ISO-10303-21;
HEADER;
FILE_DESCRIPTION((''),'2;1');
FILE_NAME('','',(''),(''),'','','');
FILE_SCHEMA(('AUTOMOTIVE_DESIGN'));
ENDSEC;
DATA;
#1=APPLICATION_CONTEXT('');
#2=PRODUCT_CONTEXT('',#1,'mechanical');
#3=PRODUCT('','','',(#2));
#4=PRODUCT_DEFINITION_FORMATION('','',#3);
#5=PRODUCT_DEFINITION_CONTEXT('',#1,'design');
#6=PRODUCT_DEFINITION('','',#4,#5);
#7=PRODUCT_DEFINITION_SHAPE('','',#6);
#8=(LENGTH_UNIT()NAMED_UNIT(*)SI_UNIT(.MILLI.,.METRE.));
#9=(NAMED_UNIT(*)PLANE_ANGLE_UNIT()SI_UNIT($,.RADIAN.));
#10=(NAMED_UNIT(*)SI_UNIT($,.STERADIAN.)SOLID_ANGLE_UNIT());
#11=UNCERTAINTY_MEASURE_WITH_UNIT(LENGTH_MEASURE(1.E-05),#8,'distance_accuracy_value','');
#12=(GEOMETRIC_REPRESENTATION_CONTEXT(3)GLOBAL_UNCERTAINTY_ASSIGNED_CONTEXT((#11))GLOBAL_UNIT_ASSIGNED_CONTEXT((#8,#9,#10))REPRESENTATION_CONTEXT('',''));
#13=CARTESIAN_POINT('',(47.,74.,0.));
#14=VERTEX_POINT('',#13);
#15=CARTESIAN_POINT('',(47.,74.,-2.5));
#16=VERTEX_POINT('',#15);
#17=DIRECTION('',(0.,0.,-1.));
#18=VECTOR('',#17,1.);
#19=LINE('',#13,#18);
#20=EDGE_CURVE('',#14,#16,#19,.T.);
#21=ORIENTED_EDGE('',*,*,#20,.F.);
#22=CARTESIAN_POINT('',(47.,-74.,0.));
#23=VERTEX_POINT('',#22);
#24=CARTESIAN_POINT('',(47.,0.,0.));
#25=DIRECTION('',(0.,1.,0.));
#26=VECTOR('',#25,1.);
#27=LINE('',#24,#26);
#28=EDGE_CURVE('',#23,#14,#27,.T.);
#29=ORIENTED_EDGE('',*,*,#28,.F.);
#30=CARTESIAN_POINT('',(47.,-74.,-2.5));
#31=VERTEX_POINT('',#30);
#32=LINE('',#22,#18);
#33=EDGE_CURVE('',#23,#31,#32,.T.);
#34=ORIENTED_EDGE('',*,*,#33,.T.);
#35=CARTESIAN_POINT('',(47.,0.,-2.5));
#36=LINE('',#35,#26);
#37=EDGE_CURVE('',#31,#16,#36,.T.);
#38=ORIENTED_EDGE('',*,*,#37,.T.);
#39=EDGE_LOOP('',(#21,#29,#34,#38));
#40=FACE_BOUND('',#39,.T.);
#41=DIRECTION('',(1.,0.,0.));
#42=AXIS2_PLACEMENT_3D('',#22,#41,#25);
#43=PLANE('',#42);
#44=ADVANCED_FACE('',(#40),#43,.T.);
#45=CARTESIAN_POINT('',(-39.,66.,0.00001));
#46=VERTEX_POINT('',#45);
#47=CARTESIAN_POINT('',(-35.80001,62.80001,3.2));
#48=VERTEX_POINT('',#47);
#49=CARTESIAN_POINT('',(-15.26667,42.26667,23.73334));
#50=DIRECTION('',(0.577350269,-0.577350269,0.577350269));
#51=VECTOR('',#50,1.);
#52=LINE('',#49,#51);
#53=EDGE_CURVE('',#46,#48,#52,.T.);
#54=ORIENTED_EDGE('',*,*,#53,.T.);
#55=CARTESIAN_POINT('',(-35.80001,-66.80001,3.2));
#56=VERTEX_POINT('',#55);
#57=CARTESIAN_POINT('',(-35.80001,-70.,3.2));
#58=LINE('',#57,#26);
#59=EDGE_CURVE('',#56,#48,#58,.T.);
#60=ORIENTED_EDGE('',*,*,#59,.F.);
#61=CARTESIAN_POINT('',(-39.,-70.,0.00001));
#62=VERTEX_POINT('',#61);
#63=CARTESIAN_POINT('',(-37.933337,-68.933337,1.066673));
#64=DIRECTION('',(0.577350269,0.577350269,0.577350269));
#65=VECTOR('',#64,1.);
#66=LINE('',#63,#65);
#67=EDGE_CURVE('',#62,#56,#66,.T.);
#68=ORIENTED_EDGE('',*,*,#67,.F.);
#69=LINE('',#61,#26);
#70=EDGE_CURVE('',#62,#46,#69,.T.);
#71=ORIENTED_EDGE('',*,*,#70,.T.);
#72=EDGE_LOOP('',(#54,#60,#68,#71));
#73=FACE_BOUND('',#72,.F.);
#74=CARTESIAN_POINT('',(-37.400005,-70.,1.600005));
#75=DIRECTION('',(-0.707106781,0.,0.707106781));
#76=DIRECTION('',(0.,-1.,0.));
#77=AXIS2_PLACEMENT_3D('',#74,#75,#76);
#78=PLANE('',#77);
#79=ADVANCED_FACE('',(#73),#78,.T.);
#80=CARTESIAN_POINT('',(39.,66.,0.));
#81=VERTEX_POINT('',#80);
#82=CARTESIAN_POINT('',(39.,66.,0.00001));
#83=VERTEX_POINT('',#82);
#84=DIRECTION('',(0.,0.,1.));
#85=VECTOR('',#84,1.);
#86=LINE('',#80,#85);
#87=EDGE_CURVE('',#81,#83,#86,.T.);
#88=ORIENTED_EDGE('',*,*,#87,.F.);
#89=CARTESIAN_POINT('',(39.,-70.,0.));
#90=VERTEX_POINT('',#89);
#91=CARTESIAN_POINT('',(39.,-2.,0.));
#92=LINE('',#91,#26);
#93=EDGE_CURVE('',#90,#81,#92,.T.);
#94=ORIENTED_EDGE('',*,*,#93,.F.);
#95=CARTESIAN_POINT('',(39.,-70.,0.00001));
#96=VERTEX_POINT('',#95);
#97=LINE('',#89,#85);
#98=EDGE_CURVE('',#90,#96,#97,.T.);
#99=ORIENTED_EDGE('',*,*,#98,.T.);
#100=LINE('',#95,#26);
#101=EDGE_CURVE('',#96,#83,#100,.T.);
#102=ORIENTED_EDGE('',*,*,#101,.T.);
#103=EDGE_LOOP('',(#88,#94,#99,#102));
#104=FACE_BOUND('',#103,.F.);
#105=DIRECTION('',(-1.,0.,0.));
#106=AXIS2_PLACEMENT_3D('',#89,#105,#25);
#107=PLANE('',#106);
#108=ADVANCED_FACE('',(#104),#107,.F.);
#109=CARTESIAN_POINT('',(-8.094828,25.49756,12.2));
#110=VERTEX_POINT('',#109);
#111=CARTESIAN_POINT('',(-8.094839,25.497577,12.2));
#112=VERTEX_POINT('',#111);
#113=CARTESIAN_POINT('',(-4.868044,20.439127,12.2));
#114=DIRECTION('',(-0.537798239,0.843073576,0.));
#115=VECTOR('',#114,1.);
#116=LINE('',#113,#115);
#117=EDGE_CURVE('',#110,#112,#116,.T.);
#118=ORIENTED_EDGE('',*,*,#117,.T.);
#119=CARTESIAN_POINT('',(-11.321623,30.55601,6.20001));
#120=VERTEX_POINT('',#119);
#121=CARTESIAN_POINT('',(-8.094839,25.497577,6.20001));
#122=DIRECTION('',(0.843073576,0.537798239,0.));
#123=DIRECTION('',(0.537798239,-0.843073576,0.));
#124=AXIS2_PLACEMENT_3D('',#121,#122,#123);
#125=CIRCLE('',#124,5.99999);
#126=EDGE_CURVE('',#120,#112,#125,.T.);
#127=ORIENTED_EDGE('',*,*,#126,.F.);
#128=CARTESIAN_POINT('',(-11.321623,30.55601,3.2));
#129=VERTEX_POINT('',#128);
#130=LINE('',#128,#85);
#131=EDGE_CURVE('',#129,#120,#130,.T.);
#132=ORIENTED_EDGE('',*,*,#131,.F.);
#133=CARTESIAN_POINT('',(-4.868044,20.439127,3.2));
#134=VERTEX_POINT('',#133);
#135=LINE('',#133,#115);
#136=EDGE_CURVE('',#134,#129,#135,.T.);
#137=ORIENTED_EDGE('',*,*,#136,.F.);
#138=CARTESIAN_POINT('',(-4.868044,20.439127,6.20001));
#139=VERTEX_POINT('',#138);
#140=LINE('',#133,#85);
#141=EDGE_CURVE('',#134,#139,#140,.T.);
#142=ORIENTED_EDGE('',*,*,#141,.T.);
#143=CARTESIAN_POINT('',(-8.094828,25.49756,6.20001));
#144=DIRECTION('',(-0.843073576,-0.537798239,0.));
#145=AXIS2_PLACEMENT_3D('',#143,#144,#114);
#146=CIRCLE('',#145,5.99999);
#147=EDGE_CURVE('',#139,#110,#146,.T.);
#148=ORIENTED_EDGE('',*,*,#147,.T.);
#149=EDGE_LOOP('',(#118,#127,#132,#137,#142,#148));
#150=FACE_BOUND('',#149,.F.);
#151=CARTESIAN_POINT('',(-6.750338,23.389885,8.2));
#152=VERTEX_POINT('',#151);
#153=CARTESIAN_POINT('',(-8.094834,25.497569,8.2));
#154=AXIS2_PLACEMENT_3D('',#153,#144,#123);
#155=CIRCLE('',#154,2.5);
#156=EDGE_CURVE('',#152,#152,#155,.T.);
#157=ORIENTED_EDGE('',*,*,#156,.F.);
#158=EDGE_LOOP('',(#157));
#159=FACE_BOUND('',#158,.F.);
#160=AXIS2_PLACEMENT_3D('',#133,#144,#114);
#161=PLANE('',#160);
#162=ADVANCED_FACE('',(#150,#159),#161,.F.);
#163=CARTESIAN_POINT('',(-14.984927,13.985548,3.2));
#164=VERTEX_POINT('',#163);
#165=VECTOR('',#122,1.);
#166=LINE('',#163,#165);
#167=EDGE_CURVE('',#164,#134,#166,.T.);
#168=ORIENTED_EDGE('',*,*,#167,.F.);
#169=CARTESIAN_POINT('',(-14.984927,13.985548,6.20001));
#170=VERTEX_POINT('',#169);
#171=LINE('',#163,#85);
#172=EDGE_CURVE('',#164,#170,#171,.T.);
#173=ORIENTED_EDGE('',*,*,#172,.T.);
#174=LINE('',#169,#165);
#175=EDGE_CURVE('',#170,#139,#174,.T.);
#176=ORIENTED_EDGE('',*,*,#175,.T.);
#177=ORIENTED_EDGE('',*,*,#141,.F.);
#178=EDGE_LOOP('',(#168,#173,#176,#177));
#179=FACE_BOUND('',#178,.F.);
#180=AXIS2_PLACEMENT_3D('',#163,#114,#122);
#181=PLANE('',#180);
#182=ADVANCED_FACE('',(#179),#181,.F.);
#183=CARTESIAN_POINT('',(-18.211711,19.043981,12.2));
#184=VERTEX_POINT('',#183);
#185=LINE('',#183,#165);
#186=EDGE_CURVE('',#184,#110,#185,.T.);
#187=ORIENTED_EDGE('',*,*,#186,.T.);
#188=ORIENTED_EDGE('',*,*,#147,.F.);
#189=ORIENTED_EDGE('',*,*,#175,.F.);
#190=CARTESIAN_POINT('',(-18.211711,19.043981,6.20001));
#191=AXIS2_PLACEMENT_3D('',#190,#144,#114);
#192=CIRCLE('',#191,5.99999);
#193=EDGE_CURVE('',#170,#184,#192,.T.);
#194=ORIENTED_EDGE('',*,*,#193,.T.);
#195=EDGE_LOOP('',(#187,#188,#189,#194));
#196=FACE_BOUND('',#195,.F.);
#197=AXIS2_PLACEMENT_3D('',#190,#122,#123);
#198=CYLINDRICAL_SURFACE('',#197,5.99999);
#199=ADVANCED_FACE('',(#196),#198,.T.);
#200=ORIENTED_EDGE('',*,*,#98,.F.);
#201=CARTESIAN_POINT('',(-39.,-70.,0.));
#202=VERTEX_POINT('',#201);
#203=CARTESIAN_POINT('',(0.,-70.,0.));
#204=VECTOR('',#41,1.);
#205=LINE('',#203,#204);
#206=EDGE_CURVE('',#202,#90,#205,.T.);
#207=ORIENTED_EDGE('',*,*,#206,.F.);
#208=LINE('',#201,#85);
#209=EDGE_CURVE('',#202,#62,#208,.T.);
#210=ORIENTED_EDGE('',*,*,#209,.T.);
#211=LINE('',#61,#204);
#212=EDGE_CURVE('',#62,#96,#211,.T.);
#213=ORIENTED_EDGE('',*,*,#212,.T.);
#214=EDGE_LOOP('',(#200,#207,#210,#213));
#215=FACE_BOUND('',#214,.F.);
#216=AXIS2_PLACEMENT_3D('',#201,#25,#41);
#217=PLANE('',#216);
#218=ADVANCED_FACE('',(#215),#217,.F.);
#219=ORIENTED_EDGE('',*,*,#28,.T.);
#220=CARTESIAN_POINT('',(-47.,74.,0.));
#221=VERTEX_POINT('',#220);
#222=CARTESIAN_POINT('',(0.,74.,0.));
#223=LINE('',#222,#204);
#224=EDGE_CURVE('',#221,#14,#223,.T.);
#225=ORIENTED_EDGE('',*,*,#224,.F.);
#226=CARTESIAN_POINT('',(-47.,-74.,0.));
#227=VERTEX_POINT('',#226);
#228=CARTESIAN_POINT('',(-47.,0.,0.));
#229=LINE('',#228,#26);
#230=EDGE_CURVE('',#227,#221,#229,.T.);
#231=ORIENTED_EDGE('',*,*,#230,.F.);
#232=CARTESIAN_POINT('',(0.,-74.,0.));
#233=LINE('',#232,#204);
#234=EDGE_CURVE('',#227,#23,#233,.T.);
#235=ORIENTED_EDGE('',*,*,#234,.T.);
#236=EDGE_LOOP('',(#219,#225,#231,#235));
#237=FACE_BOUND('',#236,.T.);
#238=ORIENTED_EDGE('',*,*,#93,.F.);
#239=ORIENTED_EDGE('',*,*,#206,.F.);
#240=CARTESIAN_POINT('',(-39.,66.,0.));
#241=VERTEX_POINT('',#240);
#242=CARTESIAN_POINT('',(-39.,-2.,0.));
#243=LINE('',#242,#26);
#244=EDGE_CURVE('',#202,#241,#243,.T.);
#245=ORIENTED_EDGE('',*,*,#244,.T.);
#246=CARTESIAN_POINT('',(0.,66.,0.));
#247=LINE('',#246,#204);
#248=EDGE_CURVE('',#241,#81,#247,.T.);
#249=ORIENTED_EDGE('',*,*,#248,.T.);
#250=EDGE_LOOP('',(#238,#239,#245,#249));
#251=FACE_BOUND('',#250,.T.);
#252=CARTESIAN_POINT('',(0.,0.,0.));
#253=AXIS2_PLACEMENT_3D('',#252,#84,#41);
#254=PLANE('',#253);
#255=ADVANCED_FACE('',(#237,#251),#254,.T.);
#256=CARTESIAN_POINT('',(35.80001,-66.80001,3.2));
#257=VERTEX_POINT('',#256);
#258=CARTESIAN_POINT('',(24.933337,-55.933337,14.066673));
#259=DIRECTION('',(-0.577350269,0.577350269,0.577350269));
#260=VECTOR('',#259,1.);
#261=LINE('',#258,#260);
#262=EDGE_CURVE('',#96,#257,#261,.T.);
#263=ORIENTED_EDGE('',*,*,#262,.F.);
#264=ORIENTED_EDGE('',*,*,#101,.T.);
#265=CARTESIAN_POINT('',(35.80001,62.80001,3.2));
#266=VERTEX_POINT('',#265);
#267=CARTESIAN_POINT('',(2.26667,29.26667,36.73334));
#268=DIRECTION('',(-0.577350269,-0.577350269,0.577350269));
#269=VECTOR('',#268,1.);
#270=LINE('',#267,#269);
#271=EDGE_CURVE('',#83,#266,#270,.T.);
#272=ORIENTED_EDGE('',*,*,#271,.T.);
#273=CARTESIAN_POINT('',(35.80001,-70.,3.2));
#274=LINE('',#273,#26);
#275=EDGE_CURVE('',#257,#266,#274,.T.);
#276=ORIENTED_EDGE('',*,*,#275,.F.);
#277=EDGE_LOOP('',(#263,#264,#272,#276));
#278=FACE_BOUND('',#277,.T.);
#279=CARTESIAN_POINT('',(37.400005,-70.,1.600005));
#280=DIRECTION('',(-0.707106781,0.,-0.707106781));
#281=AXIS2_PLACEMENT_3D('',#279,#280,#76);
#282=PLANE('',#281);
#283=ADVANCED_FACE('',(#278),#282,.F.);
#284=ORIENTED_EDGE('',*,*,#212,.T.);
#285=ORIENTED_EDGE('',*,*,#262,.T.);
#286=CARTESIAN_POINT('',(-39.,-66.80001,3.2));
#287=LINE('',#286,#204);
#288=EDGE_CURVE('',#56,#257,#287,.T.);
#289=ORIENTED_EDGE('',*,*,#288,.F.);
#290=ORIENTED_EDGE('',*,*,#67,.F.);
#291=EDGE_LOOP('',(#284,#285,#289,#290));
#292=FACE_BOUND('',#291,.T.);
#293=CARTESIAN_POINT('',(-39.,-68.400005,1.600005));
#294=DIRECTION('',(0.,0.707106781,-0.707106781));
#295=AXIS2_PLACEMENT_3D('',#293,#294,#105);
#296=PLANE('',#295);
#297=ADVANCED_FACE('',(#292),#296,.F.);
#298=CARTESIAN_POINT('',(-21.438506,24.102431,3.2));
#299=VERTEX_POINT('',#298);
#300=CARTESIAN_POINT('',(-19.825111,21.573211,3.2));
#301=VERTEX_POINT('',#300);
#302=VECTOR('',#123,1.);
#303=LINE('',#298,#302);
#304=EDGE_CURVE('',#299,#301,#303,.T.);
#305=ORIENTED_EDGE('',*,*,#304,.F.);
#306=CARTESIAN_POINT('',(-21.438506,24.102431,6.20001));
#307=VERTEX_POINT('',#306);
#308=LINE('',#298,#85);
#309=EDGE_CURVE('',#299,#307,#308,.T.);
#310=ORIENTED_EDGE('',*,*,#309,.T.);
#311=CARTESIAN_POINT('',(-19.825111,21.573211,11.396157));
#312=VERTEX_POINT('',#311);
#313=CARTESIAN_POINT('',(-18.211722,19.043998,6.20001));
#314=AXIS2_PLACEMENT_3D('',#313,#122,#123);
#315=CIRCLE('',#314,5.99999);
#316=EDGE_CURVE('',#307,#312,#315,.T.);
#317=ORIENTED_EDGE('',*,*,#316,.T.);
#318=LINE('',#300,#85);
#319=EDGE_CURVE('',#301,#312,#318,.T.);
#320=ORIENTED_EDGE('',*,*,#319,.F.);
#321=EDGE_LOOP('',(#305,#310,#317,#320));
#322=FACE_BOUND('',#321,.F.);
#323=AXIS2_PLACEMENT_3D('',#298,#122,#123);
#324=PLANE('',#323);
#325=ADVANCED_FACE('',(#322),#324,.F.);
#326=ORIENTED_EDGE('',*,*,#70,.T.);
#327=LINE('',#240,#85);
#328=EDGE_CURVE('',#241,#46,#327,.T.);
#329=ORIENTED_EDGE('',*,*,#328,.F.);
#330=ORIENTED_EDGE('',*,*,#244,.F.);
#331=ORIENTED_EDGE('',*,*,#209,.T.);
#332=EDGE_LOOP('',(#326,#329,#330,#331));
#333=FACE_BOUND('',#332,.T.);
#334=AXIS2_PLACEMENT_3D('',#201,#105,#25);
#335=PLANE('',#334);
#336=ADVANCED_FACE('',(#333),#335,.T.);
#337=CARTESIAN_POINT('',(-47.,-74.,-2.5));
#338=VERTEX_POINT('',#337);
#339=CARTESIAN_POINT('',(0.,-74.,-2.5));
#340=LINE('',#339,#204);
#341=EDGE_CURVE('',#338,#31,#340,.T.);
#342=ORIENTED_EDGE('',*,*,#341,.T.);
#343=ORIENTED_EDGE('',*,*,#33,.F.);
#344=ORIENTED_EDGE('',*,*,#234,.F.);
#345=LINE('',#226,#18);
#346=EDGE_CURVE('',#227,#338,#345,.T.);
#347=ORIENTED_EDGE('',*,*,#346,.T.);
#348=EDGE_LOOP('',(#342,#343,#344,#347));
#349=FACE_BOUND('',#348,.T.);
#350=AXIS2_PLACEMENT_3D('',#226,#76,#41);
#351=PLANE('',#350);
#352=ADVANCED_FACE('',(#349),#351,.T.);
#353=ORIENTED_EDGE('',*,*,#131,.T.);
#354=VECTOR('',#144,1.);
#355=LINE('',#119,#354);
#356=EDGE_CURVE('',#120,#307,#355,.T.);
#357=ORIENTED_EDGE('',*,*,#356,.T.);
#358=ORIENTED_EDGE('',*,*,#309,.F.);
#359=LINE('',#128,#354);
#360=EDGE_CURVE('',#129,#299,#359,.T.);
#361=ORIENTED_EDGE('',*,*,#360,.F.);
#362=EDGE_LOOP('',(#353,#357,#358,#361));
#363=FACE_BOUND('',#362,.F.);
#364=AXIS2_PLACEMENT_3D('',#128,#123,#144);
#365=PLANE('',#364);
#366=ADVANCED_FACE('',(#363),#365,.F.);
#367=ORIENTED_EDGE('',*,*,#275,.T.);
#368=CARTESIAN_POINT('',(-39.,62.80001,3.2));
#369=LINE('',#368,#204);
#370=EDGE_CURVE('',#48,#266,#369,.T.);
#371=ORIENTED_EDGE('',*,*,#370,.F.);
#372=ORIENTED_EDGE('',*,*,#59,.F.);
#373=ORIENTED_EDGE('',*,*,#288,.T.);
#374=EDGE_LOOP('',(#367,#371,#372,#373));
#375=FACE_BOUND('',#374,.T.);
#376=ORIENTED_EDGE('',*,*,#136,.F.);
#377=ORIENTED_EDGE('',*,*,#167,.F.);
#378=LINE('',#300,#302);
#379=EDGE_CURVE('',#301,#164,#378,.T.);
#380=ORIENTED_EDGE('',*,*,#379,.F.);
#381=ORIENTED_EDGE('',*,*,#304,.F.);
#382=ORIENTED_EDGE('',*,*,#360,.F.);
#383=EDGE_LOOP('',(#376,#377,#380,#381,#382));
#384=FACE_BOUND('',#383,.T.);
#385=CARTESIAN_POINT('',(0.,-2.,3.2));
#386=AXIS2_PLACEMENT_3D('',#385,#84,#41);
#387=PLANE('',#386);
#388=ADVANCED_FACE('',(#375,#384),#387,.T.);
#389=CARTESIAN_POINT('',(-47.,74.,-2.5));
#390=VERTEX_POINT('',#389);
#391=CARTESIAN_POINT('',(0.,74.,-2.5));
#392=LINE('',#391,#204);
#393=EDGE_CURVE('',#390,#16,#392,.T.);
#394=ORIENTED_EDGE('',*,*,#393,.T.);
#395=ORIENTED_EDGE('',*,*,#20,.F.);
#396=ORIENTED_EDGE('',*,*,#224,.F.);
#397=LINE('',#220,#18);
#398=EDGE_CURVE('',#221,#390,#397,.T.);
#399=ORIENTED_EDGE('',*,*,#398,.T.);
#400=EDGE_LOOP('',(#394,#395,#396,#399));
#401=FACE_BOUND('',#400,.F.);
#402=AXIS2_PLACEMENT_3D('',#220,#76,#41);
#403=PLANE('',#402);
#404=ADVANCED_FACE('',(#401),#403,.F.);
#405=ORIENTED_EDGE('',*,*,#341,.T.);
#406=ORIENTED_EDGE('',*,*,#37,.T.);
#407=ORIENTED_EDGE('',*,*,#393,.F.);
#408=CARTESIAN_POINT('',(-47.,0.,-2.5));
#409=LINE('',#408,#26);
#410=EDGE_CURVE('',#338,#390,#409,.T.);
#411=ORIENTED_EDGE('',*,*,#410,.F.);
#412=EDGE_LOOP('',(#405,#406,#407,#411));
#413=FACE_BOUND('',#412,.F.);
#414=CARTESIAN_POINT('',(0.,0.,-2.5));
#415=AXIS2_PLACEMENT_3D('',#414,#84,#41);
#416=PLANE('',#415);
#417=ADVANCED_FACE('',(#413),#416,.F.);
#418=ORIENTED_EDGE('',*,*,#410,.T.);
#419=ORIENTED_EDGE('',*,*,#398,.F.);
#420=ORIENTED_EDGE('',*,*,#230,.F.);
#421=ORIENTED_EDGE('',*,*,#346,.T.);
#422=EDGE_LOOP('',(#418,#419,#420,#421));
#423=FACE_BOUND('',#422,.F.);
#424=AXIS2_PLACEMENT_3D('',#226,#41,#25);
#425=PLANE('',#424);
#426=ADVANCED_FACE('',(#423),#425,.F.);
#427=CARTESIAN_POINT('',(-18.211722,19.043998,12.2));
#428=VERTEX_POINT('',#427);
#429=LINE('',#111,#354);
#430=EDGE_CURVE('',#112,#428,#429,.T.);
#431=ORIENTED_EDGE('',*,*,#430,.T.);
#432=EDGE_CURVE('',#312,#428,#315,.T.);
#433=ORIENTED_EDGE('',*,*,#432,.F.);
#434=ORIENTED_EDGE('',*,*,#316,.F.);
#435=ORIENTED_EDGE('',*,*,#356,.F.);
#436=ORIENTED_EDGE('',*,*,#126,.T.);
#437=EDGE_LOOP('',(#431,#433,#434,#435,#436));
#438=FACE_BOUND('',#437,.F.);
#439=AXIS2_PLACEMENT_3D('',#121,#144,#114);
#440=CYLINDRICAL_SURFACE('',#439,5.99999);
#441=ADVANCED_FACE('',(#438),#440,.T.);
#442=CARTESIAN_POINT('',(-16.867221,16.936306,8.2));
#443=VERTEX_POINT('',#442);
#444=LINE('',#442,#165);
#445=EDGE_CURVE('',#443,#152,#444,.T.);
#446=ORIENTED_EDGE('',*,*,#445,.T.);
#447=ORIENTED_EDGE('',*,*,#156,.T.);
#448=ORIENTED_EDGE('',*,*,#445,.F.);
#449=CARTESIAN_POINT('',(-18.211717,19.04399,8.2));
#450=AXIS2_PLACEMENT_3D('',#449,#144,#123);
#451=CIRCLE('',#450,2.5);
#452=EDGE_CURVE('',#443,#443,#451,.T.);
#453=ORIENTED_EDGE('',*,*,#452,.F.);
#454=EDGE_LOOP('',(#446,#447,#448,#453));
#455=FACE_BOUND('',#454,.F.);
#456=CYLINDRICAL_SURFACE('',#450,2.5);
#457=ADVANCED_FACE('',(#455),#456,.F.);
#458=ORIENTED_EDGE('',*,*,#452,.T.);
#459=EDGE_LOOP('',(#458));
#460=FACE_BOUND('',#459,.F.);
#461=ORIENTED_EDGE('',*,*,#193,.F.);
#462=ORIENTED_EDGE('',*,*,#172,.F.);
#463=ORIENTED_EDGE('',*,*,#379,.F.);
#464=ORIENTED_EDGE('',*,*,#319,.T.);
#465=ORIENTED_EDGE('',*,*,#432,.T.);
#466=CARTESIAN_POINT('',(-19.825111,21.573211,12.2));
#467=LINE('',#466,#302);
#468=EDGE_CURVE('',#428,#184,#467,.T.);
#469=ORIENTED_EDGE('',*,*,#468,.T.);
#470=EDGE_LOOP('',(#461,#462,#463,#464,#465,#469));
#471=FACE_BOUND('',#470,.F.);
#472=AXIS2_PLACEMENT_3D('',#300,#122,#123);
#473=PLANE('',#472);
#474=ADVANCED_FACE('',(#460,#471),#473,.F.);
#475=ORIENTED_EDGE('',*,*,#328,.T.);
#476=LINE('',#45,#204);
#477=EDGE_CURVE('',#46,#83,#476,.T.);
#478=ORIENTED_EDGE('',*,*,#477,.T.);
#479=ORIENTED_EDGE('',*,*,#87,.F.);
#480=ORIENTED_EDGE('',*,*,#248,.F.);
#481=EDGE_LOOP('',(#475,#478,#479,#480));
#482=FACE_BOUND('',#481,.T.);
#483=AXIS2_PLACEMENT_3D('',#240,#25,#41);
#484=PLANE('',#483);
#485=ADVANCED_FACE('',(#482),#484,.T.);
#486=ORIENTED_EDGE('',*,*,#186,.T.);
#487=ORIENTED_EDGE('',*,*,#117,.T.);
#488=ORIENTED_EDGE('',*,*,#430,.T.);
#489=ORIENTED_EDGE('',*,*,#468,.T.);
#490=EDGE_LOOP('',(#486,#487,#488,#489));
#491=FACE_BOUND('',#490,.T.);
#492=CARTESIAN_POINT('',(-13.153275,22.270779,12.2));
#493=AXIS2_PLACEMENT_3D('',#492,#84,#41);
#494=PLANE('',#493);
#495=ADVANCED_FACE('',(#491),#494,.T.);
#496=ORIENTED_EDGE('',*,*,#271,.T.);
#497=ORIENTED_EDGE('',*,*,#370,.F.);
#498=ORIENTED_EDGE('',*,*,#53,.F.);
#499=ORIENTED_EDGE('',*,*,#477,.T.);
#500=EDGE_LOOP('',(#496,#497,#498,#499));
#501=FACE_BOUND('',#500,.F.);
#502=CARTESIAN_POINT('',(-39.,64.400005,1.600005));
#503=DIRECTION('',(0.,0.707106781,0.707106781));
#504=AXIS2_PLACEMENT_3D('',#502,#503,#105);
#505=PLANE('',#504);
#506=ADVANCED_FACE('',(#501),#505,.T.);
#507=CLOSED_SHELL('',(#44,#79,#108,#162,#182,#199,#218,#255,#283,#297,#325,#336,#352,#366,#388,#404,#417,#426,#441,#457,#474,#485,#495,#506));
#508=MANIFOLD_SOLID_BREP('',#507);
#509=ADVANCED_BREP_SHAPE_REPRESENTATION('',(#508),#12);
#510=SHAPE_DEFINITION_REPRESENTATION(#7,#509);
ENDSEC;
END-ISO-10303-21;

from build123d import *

# Parameters (mm, degrees)
F0_W     = 94
F0_H     = 148
F0_W_2   = 78
F0_H_2   = 136
F1_DEPTH = 2.5
F2_DEPTH = 3.2
F3_SIZE  = 3.19999
F6_DEPTH = 9
F7_R     = 5.99999
F8_R     = 2.5
F9_DEPTH = 12.1


# Not quite as in the source:
# - a fillet or chamfer is up to 0.001 mm smaller than in the source, because OpenCascade refuses the exact size


with BuildPart() as f1:
    # F0 (on Top) → F1 (new body)
    with BuildSketch(Plane.XY):
        Rectangle(F0_W, F0_H)
        with Locations((0, -2)):
            Rectangle(F0_W_2, F0_H_2, mode=Mode.SUBTRACT)
        with Locations((0, -2)):
            Rectangle(F0_W_2, F0_H_2)
    extrude(amount=-F1_DEPTH)

    # F0 (on Top) → F2 (join)
    with BuildSketch(Plane.XY):
        with Locations((0, -2)):
            Rectangle(F0_W_2, F0_H_2)
    extrude(amount=F2_DEPTH)

    # F3 (size 3.2 in the source; OpenCascade refuses exactly that, so slightly less here)
    f3_edges = [f1.edges().sort_by_distance(p)[0] for p in [
        (-39, -2, 3.2),
        (0, -70, 3.2),
        (39, -2, 3.2),
        (0, 66, 3.2),
    ]]
    chamfer(f3_edges, length=F3_SIZE)

    # F5 (on face) → F6 (join)
    with BuildSketch(Plane.XY.offset(3.2)):
        Polygon((-21.4385061716, 24.1024312943), (-19.825111455, 21.5732105668), (-14.9849273053, 13.9855483843), (-4.8680443952, 20.4391272506), (-11.3216232616, 30.5560101607), align=None)
    extrude(amount=F6_DEPTH)

    # F7 (radius 6 in the source; OpenCascade refuses exactly that, so slightly less here)
    f7_edges = [f1.edges().sort_by_distance(p)[0] for p in [
        (-9.926486, 17.212338, 12.2),
        (-16.380065, 27.329221, 12.2),
    ]]
    fillet(f7_edges, radius=F7_R)

    # F8 (on face) → F9 (cut)
    with BuildSketch(Plane(origin=(-4.3097861814, -2.749220809, 0), x_dir=(0.5377982389, -0.8430735758, 0), z_dir=(-0.8430735758, -0.5377982389, 0))):
        with Locations((-25.8497138006, 8.2)):
            Circle(F8_R)
    extrude(amount=-F9_DEPTH, mode=Mode.SUBTRACT)


solid = f1.part
